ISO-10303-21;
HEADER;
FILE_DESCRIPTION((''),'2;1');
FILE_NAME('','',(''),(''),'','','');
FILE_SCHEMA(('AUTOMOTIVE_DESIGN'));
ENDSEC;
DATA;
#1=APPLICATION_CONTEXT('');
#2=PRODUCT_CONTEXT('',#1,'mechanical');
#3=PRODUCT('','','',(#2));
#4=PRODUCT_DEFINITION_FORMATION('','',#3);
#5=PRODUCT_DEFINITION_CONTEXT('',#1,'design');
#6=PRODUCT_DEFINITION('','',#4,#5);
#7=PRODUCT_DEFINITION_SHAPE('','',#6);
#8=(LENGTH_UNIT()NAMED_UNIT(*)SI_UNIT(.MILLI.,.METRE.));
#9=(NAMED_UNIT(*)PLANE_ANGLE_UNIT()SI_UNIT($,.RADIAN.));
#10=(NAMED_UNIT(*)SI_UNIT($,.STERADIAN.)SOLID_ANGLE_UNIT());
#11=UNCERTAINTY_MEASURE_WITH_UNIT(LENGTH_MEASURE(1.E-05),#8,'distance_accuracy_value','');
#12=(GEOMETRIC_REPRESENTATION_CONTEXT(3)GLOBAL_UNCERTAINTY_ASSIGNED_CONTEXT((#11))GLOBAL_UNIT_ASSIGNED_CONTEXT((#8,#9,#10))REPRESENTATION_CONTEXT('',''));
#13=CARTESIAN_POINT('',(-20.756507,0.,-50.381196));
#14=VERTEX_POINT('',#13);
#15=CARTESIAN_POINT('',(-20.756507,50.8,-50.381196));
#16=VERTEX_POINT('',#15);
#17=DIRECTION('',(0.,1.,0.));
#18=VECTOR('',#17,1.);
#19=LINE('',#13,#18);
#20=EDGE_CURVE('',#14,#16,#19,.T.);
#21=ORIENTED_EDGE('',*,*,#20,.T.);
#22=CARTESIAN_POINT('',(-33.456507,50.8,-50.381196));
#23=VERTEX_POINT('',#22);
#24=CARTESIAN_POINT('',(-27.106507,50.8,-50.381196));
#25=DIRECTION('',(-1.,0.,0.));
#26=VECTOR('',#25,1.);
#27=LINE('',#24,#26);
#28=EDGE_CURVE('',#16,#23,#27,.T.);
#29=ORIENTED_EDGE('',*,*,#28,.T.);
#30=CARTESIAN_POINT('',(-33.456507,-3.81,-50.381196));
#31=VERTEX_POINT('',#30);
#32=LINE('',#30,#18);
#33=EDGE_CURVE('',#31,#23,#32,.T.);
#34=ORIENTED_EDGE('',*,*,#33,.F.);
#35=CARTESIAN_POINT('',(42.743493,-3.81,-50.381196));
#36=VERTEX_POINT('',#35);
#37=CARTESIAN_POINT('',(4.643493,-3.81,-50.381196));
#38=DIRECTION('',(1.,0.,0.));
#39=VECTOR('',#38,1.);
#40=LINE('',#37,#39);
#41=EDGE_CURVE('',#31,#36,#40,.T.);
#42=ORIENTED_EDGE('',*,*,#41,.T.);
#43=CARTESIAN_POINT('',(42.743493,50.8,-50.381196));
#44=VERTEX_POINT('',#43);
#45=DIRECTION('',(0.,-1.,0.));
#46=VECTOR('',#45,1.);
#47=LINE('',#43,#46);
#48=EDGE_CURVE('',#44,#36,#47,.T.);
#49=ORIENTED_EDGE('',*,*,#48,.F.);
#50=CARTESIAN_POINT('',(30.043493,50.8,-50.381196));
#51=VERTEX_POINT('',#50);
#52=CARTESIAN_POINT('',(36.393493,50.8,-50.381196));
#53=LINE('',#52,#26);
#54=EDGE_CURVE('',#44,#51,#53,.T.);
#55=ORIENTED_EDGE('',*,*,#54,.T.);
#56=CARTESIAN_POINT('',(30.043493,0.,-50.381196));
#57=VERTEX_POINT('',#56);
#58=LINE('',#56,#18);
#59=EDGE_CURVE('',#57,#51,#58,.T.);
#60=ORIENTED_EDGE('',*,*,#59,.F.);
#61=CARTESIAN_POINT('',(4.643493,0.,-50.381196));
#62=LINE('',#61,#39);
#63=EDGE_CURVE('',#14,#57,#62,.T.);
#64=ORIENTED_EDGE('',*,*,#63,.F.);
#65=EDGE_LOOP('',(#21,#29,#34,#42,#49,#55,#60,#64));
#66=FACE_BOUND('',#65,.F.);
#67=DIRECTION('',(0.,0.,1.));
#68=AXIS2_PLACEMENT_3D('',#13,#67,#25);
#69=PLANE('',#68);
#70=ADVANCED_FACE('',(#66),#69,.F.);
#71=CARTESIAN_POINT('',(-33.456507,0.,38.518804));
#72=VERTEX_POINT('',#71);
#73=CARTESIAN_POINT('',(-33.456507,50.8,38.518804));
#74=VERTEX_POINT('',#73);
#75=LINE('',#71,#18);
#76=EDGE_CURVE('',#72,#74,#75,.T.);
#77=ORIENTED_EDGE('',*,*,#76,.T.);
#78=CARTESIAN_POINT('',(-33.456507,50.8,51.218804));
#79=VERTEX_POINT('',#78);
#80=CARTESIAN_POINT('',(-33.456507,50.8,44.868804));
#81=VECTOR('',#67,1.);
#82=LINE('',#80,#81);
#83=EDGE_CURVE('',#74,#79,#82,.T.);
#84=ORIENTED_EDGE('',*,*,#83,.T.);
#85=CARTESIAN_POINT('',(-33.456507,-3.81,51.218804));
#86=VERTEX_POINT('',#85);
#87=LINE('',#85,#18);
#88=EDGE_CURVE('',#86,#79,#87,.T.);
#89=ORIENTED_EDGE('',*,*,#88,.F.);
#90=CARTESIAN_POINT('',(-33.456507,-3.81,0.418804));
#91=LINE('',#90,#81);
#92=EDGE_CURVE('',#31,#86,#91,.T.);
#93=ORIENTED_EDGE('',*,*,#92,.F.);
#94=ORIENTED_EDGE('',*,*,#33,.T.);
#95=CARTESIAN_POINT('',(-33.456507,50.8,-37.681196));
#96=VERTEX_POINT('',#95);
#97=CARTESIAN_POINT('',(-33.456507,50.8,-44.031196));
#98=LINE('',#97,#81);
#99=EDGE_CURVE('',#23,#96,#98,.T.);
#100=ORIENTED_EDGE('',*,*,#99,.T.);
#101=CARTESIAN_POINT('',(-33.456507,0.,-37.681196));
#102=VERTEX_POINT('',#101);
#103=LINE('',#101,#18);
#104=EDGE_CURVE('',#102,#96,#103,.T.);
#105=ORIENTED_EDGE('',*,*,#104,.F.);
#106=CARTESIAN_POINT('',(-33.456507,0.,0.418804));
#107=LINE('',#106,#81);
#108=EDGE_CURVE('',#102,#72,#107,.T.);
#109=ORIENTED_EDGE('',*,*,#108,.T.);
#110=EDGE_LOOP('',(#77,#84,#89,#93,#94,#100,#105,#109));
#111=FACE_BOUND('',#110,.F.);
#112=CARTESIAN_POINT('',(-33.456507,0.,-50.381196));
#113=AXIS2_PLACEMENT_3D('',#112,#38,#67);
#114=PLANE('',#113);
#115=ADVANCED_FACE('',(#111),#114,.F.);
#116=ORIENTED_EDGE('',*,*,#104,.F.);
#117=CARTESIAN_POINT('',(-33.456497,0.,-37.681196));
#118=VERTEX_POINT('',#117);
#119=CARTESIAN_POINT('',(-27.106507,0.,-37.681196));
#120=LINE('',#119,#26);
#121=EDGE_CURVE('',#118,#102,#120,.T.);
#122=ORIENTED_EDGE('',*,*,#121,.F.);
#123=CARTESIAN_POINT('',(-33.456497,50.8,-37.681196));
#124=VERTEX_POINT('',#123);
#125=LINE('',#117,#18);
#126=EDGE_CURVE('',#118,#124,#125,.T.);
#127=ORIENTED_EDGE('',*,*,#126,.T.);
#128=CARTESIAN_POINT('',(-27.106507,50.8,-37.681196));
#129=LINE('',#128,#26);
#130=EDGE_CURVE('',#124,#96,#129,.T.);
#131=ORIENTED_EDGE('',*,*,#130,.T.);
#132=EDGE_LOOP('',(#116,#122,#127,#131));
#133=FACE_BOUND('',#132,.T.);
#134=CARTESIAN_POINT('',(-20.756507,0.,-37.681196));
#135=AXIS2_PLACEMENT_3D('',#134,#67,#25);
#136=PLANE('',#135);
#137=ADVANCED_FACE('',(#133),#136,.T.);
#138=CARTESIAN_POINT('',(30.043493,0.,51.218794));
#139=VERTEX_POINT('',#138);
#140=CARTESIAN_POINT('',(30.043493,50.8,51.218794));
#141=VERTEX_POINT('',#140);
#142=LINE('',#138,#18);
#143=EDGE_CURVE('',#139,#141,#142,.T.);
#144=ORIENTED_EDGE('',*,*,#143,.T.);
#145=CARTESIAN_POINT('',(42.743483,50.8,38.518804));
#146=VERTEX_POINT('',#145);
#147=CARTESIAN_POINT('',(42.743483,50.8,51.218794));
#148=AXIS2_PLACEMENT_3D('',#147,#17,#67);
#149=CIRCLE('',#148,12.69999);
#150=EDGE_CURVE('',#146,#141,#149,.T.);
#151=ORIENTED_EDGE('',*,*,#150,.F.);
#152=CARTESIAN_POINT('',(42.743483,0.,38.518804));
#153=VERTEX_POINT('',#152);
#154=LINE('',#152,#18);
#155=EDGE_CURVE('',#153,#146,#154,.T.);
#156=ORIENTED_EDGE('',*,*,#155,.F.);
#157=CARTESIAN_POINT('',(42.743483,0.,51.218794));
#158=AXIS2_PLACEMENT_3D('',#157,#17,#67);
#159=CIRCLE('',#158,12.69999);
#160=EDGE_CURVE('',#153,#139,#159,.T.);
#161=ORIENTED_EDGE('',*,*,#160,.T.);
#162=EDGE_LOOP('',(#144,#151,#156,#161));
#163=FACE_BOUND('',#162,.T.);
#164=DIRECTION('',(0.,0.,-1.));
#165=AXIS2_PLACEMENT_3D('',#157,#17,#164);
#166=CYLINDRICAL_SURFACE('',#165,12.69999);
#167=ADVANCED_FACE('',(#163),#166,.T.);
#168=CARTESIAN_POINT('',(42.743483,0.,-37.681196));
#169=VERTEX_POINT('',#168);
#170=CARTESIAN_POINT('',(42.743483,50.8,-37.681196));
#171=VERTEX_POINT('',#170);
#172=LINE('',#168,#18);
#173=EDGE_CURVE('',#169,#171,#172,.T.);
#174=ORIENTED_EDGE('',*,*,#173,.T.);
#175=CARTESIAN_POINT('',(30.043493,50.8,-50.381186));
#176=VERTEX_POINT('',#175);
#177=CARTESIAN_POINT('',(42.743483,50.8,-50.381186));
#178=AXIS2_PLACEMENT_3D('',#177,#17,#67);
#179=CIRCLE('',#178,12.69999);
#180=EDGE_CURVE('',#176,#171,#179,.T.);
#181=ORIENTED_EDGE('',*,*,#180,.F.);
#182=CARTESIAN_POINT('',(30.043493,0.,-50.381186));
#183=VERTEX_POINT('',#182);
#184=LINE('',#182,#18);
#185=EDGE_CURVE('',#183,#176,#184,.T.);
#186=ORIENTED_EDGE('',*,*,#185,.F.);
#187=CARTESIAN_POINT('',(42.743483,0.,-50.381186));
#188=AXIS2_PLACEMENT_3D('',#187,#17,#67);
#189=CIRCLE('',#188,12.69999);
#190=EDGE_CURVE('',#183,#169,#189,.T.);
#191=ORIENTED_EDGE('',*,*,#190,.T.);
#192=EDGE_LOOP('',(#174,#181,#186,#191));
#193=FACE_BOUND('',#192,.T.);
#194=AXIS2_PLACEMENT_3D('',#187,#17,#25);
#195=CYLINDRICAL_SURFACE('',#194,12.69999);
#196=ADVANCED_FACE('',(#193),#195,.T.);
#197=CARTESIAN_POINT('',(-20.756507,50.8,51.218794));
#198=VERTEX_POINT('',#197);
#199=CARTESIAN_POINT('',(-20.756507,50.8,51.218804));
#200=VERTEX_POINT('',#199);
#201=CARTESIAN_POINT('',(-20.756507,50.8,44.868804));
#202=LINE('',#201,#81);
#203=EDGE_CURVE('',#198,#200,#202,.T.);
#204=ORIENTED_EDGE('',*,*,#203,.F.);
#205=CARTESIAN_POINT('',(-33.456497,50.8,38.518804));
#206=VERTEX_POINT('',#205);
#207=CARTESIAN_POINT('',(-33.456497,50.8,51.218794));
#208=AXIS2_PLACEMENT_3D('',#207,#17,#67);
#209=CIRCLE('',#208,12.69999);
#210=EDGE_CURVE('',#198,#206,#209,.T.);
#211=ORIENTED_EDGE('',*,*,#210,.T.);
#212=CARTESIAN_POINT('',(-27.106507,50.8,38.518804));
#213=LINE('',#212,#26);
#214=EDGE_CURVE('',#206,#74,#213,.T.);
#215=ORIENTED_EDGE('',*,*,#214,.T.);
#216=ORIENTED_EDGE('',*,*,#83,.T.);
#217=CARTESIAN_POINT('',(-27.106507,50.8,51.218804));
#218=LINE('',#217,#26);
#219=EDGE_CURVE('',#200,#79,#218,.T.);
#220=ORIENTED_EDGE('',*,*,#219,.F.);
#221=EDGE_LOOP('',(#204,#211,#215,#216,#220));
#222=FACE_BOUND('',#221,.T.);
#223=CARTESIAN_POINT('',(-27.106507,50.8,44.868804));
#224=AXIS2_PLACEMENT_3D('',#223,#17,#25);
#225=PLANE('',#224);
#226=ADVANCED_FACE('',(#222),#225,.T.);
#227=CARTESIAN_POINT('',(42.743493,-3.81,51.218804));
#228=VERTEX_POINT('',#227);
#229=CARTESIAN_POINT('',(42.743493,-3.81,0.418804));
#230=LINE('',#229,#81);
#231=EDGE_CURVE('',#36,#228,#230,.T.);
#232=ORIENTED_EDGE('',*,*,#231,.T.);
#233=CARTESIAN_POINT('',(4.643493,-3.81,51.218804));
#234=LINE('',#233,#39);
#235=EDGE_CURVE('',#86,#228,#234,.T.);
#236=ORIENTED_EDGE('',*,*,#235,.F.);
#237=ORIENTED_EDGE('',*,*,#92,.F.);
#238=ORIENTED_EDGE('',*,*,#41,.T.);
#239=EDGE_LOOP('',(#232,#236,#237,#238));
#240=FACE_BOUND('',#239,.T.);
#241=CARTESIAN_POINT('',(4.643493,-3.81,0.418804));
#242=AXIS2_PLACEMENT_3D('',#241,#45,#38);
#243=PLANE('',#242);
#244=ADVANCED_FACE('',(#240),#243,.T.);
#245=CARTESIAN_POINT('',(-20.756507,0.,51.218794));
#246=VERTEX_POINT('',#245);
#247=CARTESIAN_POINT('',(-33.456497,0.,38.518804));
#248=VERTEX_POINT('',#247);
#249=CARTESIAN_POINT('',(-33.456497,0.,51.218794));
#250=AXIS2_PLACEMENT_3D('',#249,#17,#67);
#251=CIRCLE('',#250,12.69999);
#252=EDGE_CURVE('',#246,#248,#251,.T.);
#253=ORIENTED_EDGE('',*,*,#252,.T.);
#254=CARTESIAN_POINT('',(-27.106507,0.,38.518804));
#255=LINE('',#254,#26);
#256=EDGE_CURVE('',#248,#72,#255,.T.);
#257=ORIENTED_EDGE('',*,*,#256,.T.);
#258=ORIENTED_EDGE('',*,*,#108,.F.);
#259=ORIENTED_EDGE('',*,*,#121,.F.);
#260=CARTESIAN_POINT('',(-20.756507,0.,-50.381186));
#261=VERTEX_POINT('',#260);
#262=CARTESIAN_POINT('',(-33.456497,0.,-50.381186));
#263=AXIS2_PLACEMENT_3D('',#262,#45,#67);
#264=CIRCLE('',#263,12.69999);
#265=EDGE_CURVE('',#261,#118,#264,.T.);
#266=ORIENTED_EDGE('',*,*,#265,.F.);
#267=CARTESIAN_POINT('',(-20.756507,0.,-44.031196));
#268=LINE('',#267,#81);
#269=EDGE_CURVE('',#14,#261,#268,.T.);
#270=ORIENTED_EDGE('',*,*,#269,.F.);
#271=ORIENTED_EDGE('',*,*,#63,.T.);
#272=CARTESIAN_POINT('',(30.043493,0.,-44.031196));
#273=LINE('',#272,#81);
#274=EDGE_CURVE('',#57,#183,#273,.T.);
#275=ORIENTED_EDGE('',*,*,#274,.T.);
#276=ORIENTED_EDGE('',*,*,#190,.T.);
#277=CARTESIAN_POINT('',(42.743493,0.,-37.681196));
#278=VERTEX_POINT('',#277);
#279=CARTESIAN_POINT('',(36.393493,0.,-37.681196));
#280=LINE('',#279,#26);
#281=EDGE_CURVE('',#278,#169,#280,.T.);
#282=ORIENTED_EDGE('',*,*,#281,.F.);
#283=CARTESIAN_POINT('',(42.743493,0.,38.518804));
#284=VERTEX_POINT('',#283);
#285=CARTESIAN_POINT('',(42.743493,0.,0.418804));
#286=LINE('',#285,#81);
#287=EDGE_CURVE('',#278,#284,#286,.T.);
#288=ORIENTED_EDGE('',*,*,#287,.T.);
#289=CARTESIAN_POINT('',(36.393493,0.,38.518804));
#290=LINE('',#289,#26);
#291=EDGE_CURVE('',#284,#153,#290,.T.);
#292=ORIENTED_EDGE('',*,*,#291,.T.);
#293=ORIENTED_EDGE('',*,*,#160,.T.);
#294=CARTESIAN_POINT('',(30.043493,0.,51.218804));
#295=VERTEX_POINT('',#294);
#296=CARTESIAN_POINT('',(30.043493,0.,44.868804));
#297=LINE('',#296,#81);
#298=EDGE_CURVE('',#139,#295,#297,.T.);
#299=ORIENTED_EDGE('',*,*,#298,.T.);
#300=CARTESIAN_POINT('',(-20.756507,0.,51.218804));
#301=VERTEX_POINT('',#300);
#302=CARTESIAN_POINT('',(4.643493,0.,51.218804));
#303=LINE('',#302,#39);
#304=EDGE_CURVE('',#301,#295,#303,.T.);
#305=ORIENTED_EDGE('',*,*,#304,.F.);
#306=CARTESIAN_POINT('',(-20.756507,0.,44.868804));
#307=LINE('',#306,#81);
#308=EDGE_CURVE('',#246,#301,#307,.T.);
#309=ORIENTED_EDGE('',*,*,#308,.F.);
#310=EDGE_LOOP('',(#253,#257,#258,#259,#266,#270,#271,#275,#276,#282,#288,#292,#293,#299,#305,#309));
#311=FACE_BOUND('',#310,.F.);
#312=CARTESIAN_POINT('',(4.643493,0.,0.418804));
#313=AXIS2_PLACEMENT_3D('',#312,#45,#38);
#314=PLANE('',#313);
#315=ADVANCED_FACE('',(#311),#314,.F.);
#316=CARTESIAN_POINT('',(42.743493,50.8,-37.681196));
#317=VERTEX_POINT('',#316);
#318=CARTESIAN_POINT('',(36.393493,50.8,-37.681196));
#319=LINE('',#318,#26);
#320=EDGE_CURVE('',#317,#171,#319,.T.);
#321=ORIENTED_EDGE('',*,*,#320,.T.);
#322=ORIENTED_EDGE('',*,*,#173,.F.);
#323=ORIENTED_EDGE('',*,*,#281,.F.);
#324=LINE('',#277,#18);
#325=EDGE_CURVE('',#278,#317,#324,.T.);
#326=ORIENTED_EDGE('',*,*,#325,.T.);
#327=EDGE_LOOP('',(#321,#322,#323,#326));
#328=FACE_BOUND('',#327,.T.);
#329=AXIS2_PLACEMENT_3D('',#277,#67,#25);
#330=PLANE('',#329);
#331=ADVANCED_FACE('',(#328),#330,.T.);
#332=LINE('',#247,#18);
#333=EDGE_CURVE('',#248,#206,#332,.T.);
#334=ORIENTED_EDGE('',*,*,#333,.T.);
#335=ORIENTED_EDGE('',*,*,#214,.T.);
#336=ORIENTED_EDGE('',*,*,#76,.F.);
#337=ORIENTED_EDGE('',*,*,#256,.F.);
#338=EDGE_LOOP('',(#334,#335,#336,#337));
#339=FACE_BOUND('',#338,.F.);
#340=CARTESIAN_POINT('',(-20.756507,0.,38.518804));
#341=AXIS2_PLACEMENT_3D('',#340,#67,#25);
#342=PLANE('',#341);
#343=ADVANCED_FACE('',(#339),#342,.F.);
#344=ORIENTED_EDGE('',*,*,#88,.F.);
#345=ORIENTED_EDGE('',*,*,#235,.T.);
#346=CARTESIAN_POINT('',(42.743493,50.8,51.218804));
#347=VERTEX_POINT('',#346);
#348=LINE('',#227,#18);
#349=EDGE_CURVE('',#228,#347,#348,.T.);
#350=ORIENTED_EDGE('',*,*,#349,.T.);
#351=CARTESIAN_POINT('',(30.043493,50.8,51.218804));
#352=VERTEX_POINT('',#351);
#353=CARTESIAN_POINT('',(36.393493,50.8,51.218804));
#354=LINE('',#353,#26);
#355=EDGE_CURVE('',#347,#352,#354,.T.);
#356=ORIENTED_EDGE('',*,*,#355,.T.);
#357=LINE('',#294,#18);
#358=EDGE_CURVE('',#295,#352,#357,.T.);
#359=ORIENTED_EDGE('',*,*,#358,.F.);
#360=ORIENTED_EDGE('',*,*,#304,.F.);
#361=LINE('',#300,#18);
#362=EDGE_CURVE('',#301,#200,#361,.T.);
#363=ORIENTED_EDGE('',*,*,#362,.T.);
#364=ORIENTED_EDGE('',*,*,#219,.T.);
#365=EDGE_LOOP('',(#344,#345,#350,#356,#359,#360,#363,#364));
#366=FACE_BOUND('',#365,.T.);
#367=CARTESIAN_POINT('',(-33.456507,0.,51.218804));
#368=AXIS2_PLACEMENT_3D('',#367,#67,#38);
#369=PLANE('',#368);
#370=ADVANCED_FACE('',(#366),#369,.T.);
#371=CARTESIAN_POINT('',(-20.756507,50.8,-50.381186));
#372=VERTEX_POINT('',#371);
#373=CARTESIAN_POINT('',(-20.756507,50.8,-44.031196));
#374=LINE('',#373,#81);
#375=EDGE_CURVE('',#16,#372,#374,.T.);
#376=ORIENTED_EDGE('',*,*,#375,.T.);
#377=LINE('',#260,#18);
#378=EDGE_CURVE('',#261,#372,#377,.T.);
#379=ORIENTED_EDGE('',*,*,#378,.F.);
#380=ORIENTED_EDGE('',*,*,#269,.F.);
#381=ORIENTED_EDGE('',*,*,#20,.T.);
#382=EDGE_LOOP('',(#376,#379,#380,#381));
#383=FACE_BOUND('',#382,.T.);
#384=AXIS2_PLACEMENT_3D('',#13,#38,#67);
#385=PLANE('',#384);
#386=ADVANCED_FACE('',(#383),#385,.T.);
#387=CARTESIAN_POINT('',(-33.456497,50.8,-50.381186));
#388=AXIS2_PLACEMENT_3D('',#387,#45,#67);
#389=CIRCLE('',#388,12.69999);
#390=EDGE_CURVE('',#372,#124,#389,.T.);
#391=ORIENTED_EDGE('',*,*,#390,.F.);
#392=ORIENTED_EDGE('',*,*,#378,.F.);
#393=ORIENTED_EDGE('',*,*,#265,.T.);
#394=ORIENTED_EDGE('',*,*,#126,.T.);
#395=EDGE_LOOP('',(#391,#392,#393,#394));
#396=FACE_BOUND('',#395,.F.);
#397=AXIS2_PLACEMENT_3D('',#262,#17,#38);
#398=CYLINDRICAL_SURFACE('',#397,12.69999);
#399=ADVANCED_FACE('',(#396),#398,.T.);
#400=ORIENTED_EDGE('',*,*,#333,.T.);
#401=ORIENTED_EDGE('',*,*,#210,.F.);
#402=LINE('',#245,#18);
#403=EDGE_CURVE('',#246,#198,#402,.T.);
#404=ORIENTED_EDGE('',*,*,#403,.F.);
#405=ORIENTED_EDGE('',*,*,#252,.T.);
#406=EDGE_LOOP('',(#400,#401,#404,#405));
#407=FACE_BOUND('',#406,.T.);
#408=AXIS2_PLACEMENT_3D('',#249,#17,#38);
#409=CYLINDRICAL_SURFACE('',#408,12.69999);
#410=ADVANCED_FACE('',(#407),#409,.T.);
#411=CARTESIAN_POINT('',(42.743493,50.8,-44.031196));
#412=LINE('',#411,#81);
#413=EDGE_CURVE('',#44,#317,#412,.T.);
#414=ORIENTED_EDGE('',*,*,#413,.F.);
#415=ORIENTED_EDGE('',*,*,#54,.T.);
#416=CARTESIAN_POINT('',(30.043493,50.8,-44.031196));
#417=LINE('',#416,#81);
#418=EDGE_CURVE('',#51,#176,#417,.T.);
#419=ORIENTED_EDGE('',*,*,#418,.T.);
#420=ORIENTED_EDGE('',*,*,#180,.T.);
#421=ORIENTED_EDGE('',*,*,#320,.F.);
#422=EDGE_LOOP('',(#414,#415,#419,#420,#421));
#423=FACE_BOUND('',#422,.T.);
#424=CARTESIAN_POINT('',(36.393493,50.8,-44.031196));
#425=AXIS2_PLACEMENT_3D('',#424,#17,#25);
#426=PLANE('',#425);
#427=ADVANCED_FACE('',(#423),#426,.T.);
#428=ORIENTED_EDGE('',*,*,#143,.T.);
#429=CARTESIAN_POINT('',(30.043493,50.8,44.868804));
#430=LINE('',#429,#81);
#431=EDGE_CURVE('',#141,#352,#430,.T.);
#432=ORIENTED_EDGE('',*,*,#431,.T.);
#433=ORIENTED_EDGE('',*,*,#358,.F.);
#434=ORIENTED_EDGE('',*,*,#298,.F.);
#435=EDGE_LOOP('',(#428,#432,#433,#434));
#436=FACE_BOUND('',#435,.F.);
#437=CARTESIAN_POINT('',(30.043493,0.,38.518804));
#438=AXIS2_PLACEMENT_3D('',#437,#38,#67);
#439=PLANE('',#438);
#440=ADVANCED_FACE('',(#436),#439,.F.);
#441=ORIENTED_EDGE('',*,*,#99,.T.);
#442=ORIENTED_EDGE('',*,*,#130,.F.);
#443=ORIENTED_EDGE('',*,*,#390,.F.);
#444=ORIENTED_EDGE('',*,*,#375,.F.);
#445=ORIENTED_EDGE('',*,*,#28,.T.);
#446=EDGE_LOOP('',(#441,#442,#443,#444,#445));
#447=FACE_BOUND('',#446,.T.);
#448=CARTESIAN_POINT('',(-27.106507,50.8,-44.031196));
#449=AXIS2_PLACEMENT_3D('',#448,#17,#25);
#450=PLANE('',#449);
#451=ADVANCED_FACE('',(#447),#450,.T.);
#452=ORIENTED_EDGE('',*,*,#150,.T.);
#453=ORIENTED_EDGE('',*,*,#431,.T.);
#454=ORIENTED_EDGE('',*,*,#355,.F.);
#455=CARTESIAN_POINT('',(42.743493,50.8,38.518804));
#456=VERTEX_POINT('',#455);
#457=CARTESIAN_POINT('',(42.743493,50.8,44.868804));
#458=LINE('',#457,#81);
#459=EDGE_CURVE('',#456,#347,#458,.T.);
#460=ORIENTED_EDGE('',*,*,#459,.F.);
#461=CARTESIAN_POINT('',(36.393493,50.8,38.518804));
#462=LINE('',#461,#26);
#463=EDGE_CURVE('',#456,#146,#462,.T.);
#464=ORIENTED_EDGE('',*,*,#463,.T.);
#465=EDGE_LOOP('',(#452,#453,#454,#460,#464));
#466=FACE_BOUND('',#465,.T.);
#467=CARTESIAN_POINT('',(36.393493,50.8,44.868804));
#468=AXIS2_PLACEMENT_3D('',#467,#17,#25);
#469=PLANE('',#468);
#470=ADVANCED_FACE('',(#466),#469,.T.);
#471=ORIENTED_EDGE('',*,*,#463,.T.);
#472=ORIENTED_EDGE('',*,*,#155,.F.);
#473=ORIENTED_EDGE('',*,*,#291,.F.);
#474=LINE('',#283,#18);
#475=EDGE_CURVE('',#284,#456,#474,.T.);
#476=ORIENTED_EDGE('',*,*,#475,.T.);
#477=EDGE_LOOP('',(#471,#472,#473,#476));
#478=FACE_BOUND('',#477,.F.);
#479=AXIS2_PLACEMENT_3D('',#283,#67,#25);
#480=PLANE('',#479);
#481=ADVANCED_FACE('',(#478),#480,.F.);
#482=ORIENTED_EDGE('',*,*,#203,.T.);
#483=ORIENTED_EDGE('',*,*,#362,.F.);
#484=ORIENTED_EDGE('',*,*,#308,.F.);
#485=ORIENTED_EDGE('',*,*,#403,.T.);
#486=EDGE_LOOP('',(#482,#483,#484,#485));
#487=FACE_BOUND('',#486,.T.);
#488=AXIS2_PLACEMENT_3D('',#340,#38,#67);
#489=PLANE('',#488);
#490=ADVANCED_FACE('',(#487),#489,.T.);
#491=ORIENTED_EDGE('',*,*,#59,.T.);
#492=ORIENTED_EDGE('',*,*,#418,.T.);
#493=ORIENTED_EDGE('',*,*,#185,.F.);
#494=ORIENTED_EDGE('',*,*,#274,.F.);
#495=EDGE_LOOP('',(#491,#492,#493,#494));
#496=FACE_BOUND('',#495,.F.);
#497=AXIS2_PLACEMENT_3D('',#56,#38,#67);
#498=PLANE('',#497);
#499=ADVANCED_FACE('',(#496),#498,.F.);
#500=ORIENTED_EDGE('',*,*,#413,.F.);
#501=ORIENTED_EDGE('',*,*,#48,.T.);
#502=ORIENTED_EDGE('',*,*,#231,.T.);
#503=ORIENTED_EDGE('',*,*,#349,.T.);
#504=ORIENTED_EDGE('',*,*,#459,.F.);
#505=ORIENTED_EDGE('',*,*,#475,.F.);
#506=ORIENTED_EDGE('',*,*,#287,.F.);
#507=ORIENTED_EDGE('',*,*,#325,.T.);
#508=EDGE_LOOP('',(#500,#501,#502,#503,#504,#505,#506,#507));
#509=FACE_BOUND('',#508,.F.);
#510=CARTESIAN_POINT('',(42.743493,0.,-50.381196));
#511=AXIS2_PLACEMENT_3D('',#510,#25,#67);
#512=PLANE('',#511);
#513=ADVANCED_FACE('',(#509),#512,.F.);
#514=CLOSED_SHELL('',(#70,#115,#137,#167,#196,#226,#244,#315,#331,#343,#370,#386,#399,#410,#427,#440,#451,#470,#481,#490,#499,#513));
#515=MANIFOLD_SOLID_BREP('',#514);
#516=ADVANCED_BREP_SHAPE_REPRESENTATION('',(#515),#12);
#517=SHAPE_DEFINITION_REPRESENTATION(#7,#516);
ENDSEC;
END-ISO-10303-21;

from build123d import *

# Parameters (mm, degrees)
F0_W     = 76.2
F0_H     = 101.6
F1_DEPTH = 3.81
F2_W     = 12.7
F2_H     = 12.7
F3_DEPTH = 50.8
F4_R     = 12.69999


# Not quite as in the source:
# - a fillet or chamfer is up to 0.001 mm smaller than in the source, because OpenCascade refuses the exact size


with BuildPart() as f1:
    # F0 (on Front) → F1 (new body)
    with BuildSketch(Plane.XZ):
        with Locations((4.643493332, 0.4188035619)):
            Rectangle(F0_W, F0_H)
    extrude(amount=F1_DEPTH)

    # F2 (on face) → F3 (join)
    with BuildSketch(Plane(origin=(0, 0, 0), x_dir=(-1, 0, 0), z_dir=(0, 1, 0))):
        with Locations((27.106506668, -44.0311964381)):
            Rectangle(F2_W, F2_H)
        with Locations((-36.393493332, 44.8688035619)):
            Rectangle(F2_W, F2_H)
        with Locations((27.106506668, 44.8688035619)):
            Rectangle(F2_W, F2_H)
        with Locations((-36.393493332, -44.0311964381)):
            Rectangle(F2_W, F2_H)
    extrude(amount=F3_DEPTH)

    # F4 (radius 12.7 in the source; OpenCascade refuses exactly that, so slightly less here)
    f4_edges = [f1.edges().sort_by_distance(p)[0] for p in [
        (-20.756507, 25.4, 38.518804),
        (-20.756507, 25.4, -37.681196),
        (30.043493, 25.4, -37.681196),
        (30.043493, 25.4, 38.518804),
    ]]
    fillet(f4_edges, radius=F4_R)


solid = f1.part
